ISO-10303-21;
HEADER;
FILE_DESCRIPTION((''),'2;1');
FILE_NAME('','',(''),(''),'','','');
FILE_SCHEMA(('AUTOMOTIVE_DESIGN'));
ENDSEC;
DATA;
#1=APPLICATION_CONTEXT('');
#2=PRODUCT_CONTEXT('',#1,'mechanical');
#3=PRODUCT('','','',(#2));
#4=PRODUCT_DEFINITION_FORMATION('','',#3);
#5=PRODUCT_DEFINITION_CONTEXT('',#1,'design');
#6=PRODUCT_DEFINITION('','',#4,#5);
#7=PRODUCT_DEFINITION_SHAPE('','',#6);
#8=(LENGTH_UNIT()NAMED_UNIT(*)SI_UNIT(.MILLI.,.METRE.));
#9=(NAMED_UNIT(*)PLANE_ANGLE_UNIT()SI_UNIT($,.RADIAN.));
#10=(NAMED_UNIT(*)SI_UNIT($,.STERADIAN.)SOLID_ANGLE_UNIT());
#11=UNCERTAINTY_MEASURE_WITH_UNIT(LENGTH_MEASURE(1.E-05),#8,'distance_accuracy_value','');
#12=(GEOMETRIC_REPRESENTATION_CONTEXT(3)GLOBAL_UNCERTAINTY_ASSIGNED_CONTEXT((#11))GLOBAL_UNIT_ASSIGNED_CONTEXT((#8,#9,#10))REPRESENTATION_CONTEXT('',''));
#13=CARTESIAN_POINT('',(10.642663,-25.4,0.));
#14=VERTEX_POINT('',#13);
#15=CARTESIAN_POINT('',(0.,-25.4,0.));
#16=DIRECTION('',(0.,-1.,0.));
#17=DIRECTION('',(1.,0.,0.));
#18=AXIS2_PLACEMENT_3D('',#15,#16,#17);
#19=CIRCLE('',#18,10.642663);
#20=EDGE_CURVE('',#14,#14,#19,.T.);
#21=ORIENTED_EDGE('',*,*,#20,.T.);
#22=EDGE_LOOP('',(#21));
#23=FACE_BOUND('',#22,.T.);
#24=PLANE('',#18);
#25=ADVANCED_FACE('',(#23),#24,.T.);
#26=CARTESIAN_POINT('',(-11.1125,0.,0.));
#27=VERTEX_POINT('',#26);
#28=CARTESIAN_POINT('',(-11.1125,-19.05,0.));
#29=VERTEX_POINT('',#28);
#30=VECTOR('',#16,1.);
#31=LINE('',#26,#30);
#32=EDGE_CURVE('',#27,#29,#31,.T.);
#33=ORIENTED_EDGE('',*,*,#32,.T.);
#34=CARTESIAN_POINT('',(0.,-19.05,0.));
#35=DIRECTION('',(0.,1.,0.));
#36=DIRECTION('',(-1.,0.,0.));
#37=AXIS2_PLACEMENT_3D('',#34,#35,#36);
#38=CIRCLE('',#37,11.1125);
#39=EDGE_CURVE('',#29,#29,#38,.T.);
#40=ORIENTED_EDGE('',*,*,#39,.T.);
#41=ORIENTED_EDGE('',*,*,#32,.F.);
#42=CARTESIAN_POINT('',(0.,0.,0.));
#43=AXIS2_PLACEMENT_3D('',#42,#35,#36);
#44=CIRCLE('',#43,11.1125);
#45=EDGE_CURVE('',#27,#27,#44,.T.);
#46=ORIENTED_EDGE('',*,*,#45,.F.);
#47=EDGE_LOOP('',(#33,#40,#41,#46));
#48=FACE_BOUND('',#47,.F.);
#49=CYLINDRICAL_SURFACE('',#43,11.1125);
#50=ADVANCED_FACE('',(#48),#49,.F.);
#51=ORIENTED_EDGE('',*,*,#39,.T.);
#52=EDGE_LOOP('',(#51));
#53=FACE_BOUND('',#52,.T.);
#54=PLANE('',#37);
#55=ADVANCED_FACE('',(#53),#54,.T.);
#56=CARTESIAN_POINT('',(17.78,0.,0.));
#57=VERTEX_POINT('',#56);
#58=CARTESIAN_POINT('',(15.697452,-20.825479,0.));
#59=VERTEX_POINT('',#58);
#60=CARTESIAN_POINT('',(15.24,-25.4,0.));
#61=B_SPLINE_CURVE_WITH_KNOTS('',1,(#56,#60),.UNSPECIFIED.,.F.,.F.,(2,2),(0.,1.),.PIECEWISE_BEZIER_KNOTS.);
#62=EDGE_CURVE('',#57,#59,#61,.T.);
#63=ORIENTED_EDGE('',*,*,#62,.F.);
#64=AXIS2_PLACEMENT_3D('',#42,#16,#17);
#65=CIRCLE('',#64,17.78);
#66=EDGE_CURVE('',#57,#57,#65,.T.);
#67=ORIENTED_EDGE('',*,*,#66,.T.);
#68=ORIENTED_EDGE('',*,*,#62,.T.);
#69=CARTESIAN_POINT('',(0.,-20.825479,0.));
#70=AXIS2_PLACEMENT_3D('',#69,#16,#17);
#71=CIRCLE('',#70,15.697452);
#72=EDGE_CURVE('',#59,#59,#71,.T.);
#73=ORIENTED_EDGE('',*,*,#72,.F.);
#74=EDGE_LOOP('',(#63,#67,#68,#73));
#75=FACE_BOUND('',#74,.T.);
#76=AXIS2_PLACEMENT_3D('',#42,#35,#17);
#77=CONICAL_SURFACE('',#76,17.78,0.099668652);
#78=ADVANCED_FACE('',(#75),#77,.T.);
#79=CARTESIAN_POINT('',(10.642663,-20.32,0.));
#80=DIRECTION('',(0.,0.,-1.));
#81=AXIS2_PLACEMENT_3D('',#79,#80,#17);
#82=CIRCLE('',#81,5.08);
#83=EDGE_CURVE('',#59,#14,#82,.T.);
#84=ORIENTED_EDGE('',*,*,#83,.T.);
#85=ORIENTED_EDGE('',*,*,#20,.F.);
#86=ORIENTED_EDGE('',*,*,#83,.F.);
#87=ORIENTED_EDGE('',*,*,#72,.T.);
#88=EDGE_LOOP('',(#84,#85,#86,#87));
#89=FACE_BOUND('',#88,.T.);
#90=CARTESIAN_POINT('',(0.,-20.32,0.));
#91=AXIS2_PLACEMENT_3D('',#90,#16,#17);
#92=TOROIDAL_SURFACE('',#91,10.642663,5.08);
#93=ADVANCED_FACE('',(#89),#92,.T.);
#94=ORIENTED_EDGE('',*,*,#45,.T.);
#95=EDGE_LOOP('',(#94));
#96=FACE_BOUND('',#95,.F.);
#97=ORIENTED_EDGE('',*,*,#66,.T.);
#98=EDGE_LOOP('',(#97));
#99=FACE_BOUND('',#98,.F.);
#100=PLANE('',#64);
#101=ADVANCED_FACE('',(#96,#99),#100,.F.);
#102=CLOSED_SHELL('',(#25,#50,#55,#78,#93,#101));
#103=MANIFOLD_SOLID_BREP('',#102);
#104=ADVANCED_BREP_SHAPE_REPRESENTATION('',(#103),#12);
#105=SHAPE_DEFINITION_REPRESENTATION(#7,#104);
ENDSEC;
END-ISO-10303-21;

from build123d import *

# Parameters (mm, degrees)
F0_R     = 17.78
F2_R     = 15.24
F4_R     = 5.08
F5_R     = 11.1125
F6_DEPTH = 19.05


with BuildPart() as f3:
    # F0 (on Front) → F3 section 0
    with BuildSketch(Plane.XZ):
        Circle(F0_R)
    # F2 (on offset) → F3 section 1
    with BuildSketch(Plane.XZ.offset(25.4)):
        Circle(F2_R)
    loft()

    # F4
    f4_edges = [f3.edges().sort_by_distance(p)[0] for p in [
        (-15.24, -25.4, 0),
    ]]
    fillet(f4_edges, radius=F4_R)

    # F5 (on face) → F6 (cut)
    with BuildSketch(Plane(origin=(0, 0, 0), x_dir=(-1, 0, 0), z_dir=(0, 1, 0))):
        Circle(F5_R)
    extrude(amount=-F6_DEPTH, mode=Mode.SUBTRACT)


solid = f3.part
